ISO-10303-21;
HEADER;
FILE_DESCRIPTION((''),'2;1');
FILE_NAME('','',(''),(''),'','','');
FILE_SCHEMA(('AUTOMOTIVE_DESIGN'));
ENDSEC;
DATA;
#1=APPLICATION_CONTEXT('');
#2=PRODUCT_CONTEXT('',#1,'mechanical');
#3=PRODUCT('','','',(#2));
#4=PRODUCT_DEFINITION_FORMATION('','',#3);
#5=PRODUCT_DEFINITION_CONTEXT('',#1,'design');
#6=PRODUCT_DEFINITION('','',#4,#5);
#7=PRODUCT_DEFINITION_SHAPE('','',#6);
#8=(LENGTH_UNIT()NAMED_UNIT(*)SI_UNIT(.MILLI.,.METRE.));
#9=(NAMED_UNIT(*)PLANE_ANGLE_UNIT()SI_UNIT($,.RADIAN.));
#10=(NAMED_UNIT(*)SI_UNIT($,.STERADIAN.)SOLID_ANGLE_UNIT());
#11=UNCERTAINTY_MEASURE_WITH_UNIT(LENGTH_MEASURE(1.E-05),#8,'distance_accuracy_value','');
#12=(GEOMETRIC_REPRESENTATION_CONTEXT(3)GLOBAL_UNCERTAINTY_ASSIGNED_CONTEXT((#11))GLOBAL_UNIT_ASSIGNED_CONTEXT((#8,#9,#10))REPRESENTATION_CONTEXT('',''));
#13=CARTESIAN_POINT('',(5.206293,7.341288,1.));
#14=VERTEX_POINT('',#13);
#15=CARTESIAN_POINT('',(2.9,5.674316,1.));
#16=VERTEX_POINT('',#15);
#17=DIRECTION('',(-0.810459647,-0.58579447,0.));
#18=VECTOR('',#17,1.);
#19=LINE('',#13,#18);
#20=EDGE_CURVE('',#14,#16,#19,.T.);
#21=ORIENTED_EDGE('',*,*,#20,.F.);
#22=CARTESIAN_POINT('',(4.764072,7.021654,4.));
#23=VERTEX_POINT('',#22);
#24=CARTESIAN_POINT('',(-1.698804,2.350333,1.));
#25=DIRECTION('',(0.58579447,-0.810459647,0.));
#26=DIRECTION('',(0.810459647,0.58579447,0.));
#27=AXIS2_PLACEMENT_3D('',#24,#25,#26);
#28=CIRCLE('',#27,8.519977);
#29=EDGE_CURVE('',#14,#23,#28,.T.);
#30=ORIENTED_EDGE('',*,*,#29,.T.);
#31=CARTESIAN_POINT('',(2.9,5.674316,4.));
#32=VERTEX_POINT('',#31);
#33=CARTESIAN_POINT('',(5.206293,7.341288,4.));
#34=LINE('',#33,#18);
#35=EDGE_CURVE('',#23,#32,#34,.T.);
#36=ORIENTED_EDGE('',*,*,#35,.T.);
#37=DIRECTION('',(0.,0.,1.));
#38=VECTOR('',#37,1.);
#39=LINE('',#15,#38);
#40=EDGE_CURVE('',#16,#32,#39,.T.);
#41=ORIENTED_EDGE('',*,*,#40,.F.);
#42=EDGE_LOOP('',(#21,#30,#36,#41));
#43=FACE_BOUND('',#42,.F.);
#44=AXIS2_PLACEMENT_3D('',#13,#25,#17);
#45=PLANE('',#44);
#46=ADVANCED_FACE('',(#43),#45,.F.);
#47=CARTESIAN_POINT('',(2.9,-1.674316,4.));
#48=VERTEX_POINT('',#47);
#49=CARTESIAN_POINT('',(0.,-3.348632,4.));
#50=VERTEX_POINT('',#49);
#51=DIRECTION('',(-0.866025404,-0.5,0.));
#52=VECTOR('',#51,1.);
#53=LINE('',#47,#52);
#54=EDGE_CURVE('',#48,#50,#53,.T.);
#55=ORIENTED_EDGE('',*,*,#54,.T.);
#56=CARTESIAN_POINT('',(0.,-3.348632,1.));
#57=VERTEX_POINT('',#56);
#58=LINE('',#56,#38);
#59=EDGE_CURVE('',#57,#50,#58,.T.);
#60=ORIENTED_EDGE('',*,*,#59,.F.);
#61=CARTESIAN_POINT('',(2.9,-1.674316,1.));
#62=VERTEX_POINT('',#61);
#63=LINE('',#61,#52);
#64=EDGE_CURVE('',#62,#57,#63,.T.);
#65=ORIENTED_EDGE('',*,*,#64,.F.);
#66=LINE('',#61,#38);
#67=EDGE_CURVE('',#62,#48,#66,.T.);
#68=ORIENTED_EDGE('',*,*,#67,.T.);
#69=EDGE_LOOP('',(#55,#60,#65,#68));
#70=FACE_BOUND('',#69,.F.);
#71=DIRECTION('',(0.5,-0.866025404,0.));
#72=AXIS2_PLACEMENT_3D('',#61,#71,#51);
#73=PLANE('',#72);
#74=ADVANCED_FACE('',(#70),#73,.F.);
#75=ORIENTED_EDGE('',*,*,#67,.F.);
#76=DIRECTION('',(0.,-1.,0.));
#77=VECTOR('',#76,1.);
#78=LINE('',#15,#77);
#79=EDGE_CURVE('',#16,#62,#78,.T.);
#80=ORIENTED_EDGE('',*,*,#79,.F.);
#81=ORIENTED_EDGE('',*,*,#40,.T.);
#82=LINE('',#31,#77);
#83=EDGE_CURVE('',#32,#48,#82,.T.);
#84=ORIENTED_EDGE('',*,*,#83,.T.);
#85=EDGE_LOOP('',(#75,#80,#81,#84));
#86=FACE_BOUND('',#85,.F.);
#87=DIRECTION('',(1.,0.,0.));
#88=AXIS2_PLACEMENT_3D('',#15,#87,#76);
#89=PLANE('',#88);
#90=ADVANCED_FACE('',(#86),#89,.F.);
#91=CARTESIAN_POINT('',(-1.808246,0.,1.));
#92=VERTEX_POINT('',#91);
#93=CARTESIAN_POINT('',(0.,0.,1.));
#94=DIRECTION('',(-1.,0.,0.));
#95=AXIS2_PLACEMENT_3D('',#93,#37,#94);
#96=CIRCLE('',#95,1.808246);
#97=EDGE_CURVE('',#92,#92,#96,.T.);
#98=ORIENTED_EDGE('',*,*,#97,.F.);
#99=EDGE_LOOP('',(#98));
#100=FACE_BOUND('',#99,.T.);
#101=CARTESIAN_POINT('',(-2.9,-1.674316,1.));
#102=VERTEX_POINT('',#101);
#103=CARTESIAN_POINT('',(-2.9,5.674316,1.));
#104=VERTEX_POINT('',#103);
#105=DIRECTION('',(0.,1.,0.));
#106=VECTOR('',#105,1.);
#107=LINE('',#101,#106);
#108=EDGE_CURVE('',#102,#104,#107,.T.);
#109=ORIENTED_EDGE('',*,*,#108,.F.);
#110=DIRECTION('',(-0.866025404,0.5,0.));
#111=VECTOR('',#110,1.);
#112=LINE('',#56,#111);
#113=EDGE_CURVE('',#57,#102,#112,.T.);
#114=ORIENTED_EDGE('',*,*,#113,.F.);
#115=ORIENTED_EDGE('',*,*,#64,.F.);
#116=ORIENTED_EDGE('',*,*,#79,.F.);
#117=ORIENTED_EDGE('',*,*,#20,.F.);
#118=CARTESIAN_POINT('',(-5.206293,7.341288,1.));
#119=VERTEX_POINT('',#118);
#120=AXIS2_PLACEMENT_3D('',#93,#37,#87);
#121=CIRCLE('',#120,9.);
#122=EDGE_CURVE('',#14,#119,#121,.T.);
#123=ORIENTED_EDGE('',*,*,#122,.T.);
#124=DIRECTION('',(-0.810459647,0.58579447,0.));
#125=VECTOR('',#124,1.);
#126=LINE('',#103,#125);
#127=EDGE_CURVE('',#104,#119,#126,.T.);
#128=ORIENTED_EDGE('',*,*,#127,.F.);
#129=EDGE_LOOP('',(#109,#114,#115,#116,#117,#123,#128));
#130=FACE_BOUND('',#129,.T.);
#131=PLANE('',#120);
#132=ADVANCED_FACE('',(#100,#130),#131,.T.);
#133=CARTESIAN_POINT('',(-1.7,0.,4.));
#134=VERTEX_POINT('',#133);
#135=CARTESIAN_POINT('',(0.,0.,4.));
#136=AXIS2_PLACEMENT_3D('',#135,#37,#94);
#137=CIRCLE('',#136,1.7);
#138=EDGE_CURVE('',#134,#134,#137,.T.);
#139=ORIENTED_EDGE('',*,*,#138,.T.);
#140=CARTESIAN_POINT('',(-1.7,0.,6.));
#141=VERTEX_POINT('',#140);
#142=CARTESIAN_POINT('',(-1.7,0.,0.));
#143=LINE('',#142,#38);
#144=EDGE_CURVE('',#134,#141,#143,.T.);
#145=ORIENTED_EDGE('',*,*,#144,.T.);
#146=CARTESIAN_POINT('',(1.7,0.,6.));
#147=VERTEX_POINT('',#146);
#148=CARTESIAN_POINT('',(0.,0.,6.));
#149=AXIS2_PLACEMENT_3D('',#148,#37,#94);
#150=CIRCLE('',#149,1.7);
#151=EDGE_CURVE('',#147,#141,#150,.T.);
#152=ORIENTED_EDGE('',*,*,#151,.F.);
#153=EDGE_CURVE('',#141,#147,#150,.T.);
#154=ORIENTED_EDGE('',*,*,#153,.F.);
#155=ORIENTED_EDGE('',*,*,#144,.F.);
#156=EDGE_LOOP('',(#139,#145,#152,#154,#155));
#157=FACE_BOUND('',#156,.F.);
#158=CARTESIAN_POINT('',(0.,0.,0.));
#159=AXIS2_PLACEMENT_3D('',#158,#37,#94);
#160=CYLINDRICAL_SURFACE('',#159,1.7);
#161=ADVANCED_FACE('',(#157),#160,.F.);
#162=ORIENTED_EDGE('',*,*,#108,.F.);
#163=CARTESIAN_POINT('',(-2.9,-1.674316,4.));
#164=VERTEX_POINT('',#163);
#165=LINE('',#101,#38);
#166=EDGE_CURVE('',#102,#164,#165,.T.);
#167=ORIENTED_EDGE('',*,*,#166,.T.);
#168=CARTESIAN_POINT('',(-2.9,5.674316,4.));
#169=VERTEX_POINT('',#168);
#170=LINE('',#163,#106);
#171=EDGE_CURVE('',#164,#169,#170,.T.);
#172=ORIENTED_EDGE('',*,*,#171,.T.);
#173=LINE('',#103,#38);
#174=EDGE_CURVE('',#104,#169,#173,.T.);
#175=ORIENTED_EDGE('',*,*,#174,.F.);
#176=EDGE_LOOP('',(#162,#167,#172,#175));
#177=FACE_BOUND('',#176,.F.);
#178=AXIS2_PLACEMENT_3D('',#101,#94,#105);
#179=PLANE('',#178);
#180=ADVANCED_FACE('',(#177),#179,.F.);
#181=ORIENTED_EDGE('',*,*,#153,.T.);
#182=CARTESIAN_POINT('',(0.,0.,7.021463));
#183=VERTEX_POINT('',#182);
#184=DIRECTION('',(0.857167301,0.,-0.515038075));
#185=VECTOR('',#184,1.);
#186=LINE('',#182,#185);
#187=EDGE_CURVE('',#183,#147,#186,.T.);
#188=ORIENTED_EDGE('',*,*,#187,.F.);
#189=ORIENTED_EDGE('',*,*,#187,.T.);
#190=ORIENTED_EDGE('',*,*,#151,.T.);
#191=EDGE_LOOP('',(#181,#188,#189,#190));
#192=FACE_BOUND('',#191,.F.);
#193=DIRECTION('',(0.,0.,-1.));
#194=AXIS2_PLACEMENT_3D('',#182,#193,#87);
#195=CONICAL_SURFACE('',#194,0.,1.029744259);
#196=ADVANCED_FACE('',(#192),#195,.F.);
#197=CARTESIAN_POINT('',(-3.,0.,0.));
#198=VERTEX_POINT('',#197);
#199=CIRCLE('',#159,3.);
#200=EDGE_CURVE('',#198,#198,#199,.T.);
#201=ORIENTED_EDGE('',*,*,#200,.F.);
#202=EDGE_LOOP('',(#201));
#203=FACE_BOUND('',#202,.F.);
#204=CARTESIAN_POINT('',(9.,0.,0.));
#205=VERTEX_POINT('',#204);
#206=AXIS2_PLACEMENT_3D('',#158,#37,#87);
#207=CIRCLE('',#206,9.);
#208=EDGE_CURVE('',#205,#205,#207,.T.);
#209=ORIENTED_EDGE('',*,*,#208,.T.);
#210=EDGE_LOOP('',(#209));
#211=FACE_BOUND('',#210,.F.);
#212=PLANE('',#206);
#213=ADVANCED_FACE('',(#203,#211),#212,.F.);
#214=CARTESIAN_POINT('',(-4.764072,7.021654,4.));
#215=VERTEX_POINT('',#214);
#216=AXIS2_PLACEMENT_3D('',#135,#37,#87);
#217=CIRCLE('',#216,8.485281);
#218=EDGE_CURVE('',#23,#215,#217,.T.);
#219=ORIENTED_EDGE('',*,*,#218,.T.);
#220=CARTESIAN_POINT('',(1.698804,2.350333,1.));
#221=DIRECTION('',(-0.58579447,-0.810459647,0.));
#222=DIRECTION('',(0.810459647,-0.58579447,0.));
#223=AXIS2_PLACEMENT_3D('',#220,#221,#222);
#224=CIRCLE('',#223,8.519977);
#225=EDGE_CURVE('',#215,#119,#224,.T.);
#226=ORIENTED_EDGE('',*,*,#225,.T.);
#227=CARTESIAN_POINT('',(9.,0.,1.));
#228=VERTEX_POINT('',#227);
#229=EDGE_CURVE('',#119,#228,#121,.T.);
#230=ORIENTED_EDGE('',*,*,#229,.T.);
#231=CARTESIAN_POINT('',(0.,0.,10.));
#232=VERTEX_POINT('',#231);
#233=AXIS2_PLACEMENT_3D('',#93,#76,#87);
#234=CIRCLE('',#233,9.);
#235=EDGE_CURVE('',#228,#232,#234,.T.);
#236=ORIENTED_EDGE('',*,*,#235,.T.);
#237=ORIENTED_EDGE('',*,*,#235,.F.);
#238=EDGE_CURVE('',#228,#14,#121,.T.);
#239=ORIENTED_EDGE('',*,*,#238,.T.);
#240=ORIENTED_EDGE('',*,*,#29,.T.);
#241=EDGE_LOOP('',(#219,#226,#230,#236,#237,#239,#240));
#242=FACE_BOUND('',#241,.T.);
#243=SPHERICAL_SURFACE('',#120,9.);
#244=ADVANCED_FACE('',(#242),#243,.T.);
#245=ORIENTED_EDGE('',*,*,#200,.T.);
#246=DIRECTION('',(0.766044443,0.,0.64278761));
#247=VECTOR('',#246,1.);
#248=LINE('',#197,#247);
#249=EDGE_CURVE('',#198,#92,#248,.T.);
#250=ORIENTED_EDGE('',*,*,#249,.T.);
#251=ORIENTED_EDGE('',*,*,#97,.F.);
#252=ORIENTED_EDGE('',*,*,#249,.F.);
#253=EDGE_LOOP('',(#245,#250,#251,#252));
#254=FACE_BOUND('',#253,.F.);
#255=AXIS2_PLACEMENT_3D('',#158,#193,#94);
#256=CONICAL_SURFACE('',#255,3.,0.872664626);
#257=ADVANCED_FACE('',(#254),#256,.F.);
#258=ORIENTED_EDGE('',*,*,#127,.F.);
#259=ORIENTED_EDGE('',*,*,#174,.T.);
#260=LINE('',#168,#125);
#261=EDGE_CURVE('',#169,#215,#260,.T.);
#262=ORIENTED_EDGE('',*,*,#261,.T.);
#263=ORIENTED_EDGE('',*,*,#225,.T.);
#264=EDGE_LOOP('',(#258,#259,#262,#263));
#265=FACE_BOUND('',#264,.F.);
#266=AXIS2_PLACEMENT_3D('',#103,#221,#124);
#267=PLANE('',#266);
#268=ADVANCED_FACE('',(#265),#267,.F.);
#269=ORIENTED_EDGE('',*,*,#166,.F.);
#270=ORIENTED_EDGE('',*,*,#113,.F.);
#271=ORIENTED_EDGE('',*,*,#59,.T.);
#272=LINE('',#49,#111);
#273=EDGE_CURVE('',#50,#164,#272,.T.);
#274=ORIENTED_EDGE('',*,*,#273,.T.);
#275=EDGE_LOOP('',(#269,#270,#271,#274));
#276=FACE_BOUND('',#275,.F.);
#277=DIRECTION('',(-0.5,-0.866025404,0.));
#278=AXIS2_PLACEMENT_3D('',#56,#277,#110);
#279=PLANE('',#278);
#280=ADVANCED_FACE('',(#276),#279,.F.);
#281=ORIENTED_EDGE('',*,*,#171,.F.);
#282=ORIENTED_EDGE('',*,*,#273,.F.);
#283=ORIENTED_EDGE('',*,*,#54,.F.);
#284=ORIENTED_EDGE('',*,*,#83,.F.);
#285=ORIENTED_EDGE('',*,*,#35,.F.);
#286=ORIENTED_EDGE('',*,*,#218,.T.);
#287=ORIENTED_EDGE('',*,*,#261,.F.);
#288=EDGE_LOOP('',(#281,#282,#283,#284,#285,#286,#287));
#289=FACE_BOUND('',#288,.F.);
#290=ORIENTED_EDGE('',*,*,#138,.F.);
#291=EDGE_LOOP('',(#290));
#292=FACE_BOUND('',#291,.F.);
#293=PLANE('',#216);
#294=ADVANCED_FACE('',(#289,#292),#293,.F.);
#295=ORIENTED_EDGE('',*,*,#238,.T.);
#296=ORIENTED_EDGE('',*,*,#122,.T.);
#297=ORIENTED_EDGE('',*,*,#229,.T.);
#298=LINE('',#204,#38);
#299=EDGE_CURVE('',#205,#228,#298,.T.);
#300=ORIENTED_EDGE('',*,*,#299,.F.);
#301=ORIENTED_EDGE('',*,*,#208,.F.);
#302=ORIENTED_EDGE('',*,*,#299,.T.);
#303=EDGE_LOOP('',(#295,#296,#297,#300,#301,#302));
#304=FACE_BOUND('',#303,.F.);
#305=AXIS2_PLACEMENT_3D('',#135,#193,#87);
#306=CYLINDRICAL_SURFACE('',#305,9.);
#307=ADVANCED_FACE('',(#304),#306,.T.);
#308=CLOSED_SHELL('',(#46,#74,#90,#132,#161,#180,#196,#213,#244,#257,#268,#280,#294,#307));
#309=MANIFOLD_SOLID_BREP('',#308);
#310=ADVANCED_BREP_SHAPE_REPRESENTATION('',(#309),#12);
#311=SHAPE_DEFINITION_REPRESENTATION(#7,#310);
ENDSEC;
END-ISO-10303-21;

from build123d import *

# Parameters (mm, degrees)
F0_R           = 9
F1_DEPTH       = 1
F3_DEPTH       = 3
F4_R           = 9
F5_DEPTH       = 6
F7_D           = 3.4
F7_DEPTH       = 6
F7_CSINK_D     = 6
F7_CSINK_ANGLE = 100
F7_TIP         = 1.0214630523


# Not quite as in the source:
# - a fillet or chamfer that OpenCascade refuses, or shapes differently, is made with other operations: its cross-section is extruded or revolved along the edge and cut away or added


with BuildPart() as f1:
    # F0 (on Top) → F1 (new body)
    with BuildSketch(Plane.XY):
        Circle(F0_R)
    extrude(amount=F1_DEPTH)

    # F2 (on face) → F3 (join)
    with BuildSketch(Plane.XY.offset(1)):
        with BuildLine():
            Line((2.9, 5.6743157806), (2.9, 1.6743157806))
            Line((2.9, 1.6743157806), (2.9, -1.6743157806))
            Line((2.9, -1.6743157806), (0, -3.3486315613))
            Line((0, -3.3486315613), (-2.9, -1.6743157806))
            Line((-2.9, -1.6743157806), (-2.9, 1.6743157806))
            Line((-2.9, 1.6743157806), (-2.9, 5.6743157806))
            Line((-2.9, 5.6743157806), (-5.2062932022, 7.3412881086))
            ThreePointArc((-5.2062932022, 7.3412881086), (-4.1317890302, -7.995518708), (9, 0))
            ThreePointArc((9, 0), (7.995518708, 4.1317890302), (5.2062932022, 7.3412881086))
            Line((5.2062932022, 7.3412881086), (2.9, 5.6743157806))
        make_face()
    extrude(amount=F3_DEPTH)

    # F4 (on face) → F5 (join)
    with BuildSketch(Plane.XY.offset(4)):
        Circle(F4_R)
    extrude(amount=F5_DEPTH)

    # F6: fillet of radius 9 on 1 edges, made by hand

    # F6_s1 → F6_t2 (revolve, cut)
    with BuildSketch(Plane.XZ):
        with BuildLine():
            ThreePointArc((9, 1), (6.3639610307, 7.3639610307), (0, 10))
            Line((0, 10), (9, 10))
            Line((9, 10), (9, 1))
        make_face()
    revolve(axis=Axis((0, 0, 10), (0, 0, 1)), mode=Mode.SUBTRACT)

    # F7
    with Locations(Plane(origin=(0, 0, 0), x_dir=(1, 0, 0), z_dir=(0, 0, -1))):
        with Locations((0, 0)):
            CounterSinkHole(F7_D / 2, F7_CSINK_D / 2, depth=F7_DEPTH, counter_sink_angle=F7_CSINK_ANGLE)
            with Locations((0, 0, -(F7_DEPTH + F7_TIP / 2))):  # 118° drill point
                Cone(0, F7_D / 2, F7_TIP, mode=Mode.SUBTRACT)


solid = f1.part
